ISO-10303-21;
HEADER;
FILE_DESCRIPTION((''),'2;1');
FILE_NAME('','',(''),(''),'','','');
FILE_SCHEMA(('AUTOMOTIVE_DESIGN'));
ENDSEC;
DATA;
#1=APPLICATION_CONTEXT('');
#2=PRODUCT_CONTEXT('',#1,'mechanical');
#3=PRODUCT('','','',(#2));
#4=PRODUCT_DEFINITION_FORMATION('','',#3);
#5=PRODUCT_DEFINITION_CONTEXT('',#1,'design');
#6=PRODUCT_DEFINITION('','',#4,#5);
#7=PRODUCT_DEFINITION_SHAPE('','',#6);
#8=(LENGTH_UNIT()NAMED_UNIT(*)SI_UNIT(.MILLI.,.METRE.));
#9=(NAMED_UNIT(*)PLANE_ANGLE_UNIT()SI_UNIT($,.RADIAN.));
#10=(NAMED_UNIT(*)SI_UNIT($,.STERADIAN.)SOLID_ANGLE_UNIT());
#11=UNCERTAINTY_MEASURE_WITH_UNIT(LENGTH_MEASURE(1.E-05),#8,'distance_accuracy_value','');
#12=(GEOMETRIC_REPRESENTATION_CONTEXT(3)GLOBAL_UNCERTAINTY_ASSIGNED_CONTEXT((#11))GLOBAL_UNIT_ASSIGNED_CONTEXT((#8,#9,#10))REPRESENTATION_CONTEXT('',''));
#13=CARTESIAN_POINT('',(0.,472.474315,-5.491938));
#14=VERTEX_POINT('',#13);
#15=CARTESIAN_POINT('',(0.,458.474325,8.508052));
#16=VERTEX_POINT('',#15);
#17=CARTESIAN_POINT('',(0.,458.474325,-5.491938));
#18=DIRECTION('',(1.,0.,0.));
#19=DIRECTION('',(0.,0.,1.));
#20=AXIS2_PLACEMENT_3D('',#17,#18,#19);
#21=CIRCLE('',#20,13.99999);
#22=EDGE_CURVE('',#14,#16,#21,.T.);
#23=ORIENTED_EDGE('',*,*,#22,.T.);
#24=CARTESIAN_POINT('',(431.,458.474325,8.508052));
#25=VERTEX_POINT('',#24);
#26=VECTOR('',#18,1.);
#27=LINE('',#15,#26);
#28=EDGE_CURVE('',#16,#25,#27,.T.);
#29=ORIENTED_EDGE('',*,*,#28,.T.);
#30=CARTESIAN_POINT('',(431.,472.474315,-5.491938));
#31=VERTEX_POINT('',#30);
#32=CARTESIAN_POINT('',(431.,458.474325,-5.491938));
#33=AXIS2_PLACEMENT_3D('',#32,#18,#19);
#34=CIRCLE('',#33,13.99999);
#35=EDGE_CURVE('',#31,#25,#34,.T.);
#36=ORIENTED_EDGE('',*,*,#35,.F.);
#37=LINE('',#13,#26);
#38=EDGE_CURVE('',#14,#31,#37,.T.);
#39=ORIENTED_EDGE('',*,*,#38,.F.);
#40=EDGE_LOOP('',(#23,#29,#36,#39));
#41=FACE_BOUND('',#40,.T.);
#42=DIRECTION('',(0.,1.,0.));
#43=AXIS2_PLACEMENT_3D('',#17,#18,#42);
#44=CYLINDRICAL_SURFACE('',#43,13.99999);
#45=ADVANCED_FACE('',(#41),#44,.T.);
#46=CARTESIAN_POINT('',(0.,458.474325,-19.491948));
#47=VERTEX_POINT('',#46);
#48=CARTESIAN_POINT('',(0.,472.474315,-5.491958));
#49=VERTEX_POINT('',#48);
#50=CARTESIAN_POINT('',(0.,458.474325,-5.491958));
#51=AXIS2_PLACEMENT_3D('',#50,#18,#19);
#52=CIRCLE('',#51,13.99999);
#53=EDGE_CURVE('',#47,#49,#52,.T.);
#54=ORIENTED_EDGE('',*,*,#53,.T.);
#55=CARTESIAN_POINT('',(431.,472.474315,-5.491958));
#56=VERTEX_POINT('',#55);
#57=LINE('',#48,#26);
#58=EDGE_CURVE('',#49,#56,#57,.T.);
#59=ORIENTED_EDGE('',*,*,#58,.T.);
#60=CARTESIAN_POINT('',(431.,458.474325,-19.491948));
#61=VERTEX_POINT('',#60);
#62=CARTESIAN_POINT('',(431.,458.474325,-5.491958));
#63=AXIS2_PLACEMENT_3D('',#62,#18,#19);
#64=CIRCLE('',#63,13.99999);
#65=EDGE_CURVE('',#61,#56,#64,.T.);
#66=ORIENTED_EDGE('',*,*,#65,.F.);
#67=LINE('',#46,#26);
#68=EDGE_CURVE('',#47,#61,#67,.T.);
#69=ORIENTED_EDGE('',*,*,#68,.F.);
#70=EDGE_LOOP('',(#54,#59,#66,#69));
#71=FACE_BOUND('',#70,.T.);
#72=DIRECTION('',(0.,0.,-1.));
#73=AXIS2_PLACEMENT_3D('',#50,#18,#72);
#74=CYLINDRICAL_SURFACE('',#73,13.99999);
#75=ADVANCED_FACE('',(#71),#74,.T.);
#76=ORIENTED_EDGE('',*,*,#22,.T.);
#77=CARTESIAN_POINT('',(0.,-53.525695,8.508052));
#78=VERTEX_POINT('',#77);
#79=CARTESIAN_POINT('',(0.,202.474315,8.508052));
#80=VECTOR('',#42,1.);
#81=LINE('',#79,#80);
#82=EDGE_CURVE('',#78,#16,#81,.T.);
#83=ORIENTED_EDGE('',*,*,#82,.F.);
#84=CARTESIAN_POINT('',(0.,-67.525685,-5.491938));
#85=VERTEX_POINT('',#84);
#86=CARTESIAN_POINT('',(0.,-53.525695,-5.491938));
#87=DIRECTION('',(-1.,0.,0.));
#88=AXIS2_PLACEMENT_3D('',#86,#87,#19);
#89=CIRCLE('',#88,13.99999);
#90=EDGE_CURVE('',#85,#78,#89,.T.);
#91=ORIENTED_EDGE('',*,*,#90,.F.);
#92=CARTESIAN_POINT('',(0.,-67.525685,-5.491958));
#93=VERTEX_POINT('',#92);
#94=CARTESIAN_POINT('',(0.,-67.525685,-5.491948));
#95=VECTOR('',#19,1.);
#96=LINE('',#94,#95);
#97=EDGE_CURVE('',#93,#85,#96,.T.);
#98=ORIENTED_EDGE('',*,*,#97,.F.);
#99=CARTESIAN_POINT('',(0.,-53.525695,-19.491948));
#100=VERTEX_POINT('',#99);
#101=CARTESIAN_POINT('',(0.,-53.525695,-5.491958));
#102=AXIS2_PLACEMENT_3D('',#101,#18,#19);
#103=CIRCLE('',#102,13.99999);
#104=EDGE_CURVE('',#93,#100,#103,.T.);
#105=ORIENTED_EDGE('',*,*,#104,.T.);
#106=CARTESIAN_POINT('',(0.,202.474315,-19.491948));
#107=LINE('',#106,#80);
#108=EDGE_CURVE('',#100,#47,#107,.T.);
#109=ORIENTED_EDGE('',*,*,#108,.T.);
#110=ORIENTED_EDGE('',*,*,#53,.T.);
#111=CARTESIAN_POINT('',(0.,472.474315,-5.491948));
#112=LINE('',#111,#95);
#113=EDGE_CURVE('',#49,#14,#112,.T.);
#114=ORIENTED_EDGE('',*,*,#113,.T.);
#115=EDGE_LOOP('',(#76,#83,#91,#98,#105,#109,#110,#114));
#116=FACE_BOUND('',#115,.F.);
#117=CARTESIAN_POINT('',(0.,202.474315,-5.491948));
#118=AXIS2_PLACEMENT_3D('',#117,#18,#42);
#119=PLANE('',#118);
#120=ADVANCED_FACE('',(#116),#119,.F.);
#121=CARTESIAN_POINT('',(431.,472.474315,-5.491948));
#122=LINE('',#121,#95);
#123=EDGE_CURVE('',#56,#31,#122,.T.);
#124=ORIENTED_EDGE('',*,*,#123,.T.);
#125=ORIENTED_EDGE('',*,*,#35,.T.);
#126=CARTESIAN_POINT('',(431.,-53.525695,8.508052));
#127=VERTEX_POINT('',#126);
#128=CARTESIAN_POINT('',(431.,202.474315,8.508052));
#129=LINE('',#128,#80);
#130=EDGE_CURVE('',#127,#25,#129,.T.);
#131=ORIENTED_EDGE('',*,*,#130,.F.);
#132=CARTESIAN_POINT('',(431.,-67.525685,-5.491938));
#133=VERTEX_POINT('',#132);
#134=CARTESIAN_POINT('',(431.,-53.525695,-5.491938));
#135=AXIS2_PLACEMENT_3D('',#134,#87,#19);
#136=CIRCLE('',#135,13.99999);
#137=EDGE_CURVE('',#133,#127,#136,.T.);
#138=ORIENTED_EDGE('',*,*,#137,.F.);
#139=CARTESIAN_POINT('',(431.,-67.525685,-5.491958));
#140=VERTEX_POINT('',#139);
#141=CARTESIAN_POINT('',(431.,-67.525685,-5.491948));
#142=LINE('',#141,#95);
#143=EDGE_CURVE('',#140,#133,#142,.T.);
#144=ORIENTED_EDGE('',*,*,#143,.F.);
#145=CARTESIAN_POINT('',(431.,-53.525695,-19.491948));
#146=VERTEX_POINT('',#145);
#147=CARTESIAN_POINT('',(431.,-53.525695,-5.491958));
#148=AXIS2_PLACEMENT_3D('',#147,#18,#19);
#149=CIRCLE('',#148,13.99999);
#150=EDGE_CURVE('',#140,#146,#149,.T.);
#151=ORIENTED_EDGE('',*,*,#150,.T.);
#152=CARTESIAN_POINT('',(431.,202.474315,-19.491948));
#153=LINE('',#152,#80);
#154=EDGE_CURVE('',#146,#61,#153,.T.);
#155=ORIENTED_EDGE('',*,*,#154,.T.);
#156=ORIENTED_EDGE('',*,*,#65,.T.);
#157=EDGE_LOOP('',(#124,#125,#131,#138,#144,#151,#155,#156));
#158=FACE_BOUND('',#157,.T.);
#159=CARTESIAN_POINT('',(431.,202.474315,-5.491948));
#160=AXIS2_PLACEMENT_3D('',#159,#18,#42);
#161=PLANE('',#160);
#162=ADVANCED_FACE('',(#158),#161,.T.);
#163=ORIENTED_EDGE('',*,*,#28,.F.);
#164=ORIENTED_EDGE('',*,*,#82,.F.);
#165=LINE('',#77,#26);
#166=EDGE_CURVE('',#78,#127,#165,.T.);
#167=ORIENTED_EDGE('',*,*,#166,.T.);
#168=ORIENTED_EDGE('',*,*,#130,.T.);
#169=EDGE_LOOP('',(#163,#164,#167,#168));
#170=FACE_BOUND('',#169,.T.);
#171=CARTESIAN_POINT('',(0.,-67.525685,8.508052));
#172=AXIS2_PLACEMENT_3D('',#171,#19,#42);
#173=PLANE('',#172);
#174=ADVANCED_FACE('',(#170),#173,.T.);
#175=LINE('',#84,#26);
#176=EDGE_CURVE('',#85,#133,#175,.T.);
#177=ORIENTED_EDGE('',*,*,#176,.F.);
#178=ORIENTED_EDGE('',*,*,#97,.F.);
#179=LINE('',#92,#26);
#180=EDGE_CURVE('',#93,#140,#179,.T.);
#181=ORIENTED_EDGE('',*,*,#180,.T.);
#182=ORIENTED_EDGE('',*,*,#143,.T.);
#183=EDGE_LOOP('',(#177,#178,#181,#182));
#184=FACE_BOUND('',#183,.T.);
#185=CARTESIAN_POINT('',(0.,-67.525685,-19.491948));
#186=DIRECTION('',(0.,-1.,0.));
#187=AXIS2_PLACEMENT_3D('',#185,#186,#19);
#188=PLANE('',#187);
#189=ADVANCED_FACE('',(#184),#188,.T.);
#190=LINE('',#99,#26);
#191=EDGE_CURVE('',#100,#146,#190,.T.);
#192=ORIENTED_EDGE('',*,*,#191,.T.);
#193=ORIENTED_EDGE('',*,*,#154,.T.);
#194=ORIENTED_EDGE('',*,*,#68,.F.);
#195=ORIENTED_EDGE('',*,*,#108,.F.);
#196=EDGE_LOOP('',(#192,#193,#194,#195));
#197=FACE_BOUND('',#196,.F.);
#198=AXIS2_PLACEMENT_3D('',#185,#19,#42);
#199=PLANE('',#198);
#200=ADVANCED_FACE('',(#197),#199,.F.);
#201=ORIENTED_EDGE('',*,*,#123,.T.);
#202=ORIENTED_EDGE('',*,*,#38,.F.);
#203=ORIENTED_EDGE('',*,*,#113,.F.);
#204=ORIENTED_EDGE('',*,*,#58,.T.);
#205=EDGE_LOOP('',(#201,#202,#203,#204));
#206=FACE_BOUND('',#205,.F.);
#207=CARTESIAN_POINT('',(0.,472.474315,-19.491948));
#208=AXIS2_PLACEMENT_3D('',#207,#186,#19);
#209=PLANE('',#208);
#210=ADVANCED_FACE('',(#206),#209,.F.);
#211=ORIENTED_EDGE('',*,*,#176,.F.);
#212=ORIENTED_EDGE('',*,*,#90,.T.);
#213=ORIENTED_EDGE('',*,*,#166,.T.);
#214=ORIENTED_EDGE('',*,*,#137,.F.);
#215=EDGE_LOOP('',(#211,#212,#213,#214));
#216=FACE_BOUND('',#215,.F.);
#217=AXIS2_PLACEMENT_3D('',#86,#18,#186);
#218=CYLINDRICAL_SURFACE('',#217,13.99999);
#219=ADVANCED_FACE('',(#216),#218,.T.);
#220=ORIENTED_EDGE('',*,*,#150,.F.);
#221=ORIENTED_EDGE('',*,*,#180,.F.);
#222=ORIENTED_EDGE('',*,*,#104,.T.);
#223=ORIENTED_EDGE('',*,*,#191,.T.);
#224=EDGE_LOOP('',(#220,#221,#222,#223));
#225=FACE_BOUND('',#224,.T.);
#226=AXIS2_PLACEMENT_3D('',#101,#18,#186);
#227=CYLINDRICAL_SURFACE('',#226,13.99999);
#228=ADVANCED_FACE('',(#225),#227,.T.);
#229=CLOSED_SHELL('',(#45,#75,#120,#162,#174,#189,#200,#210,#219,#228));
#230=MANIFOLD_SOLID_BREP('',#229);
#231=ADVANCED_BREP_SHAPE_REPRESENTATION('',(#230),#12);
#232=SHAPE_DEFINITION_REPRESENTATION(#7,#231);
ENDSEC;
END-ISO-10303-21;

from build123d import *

# Parameters (mm, degrees)
F0_W     = 540
F0_H     = 28
F1_DEPTH = 431
F2_R     = 13.99999


# Not quite as in the source:
# - a fillet or chamfer is up to 0.001 mm smaller than in the source, because OpenCascade refuses the exact size


with BuildPart() as f1:
    # F0 (on Right) → F1 (new body)
    with BuildSketch(Plane.YZ):
        with Locations((202.4743151665, -5.4919481874)):
            Rectangle(F0_W, F0_H)
    extrude(amount=F1_DEPTH)

    # F2 (radius 14 in the source; OpenCascade refuses exactly that, so slightly less here)
    f2_edges = [f1.edges().sort_by_distance(p)[0] for p in [
        (215.5, -67.525685, 8.508052),
        (215.5, -67.525685, -19.491948),
        (215.5, 472.474315, 8.508052),
        (215.5, 472.474315, -19.491948),
    ]]
    fillet(f2_edges, radius=F2_R)


solid = f1.part
